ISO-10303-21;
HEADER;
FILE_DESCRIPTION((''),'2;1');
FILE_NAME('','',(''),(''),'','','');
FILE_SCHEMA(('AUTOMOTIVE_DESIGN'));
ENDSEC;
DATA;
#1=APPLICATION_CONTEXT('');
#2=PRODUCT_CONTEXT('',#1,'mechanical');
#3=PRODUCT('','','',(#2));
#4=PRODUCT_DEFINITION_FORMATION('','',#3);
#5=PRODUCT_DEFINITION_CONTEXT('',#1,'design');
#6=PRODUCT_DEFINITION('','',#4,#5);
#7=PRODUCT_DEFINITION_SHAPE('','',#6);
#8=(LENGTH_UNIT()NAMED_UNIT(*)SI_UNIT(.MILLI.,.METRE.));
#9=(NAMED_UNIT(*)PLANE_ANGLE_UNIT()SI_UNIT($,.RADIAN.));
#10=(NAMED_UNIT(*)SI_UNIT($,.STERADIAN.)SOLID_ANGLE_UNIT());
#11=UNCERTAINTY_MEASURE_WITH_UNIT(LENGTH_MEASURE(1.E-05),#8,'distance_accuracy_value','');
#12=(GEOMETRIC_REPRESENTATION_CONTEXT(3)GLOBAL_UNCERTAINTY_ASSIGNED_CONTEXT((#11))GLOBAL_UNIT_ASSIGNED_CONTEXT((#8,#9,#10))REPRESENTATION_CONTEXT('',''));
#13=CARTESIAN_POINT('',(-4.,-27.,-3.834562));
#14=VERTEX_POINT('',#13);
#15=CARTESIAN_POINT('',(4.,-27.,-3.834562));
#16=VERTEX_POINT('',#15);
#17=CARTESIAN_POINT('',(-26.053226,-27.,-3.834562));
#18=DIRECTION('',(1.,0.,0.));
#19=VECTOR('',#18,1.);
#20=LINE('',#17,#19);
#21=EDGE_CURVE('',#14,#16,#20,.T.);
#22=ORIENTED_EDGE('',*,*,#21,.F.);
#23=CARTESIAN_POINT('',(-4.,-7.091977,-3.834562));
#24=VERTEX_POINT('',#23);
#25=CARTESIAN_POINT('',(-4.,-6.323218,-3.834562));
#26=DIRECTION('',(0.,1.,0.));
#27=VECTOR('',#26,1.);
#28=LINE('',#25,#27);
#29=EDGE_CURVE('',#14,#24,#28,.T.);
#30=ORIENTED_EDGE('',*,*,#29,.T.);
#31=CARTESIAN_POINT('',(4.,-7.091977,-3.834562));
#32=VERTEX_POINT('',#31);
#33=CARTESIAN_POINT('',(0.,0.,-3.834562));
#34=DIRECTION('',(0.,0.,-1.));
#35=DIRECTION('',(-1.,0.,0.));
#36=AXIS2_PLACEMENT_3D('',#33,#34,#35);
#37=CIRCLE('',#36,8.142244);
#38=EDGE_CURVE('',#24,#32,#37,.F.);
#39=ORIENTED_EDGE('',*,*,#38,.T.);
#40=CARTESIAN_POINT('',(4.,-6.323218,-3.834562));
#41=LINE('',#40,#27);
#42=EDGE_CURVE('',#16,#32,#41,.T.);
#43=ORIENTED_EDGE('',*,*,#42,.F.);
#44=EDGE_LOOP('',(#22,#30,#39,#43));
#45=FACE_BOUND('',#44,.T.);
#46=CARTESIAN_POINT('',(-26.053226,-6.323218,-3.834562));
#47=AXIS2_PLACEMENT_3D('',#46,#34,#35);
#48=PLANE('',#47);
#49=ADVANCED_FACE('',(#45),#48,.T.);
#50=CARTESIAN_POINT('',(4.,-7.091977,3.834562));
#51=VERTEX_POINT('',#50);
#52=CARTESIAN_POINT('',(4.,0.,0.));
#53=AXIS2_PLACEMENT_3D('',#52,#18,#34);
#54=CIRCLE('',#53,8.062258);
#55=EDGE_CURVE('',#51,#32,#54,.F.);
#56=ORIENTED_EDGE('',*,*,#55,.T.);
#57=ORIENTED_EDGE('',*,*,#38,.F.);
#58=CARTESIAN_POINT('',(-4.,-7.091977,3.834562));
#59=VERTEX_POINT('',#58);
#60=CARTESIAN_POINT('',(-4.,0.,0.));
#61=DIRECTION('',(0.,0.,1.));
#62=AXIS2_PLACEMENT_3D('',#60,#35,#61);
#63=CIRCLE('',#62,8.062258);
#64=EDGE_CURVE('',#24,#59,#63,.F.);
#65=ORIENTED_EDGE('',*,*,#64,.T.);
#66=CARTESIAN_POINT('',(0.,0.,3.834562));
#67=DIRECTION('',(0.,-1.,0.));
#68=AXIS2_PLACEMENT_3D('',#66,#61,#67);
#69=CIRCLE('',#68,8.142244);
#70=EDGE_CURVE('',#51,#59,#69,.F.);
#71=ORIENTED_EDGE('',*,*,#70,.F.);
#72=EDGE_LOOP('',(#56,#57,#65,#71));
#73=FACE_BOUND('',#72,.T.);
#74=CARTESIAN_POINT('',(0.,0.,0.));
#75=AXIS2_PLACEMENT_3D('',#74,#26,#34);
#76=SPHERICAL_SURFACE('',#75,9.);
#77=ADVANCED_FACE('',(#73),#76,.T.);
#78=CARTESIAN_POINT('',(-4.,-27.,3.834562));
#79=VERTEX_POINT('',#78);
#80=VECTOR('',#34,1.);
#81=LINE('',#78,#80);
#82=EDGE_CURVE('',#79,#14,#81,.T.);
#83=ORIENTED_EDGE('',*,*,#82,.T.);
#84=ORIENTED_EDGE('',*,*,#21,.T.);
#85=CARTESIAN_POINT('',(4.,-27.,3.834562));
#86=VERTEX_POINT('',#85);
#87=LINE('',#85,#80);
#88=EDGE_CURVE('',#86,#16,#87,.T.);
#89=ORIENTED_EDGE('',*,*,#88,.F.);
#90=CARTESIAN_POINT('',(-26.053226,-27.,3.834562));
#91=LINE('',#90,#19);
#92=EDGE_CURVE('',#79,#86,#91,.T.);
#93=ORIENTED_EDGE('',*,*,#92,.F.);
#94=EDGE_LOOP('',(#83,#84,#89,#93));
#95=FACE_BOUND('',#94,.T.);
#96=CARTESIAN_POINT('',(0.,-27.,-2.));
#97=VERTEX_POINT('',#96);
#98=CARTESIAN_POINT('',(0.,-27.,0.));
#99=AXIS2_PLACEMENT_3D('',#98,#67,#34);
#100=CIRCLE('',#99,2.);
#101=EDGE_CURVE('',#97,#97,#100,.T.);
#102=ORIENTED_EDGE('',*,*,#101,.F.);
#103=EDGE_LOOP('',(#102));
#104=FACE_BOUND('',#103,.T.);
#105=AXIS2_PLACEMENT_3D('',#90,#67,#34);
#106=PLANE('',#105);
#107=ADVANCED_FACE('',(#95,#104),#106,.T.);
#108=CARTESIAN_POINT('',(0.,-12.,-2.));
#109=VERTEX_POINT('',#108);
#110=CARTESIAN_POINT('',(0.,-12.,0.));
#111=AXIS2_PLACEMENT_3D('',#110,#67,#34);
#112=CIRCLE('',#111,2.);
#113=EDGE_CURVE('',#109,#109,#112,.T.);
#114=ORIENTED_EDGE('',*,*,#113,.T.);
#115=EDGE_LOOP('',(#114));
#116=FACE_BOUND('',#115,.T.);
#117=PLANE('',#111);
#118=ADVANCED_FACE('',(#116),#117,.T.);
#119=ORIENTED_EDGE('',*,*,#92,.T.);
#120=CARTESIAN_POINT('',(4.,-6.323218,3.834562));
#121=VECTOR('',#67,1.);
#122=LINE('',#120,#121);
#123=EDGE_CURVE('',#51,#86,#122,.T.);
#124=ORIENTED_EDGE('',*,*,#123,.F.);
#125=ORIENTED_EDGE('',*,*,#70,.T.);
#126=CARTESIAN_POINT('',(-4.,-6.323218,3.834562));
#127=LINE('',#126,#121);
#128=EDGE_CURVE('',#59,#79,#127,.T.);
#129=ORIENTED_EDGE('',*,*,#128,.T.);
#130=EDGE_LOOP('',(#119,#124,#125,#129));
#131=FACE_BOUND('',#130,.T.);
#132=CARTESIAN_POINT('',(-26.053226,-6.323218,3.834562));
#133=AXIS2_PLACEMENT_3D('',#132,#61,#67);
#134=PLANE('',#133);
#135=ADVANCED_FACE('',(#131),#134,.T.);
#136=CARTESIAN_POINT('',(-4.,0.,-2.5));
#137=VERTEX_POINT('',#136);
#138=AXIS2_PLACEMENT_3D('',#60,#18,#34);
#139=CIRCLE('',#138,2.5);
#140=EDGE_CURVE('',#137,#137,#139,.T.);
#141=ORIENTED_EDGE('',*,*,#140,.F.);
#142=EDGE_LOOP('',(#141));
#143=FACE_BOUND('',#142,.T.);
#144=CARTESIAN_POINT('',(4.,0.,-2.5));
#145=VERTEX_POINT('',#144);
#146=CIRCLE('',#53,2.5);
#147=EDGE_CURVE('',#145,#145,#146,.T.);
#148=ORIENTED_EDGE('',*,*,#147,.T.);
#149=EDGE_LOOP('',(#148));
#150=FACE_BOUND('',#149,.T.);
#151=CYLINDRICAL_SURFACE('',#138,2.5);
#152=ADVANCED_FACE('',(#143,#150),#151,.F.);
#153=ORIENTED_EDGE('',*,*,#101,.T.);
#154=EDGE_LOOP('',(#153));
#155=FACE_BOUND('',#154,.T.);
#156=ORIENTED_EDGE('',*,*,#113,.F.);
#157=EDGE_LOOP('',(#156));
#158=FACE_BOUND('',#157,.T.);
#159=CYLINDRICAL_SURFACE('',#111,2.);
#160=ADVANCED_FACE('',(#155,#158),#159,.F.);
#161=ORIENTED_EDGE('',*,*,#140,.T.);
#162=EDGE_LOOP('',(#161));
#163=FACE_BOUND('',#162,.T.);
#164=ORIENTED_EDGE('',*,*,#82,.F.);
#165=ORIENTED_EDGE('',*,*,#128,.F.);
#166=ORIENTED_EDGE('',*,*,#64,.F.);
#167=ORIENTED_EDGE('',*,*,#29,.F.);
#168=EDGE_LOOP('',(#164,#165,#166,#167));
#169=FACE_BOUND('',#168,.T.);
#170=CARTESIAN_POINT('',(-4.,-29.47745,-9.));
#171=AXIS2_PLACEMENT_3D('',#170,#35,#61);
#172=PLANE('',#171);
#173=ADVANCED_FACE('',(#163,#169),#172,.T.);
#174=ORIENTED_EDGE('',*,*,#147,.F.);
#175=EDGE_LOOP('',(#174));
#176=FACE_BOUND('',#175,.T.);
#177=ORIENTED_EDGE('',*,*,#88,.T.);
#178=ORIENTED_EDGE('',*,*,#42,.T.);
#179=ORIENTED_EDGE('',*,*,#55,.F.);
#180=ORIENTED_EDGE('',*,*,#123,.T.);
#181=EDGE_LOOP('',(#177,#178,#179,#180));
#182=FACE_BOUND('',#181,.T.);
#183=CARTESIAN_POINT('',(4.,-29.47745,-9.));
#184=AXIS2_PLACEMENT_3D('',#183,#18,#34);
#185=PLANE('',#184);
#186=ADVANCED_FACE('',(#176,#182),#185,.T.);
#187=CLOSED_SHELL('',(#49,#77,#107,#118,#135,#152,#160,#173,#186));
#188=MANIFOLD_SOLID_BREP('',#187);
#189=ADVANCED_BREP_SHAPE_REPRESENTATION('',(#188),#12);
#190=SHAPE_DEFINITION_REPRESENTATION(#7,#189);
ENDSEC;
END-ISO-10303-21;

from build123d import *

# Parameters (mm, degrees)
CUT_EXTRUDE_START        = -9
CUT_EXTRUDE_1_OUTLINE_W  = 6
CUT_EXTRUDE_1_OUTLINE_H  = 20
CUT_EXTRUDE_1_DEPTH      = 18
CUT_EXTRUDE_2_DEPTH      = 19.193405399
CUT_EXTRUDE_2_DEPTH_BACK = 19.193405399
SKETCH_3_R               = 2.5
SKETCH_4_W               = 7.669123848
SKETCH_4_H               = 20.676781993
EXTRUDE_1_DEPTH          = 8
SKETCH_5_R               = 2
CUT_EXTRUDE_3_DEPTH      = 15


with BuildPart() as part:
    # 草图1 → 旋转1 (revolve)
    with BuildSketch(Plane(origin=(0, 0, 0), x_dir=(0, 0, -1), z_dir=(1, 0, 0))):
        with BuildLine():
            Line((0, 9), (0, -9))
            ThreePointArc((0, -9), (-9, 0), (0, 9))
        make_face()
    revolve(axis=Axis((0, 9, 0), (0, -1, 0)))

    # 切除-拉伸1: read off the stored shape, not the designer's step
    # 切除-拉伸1 outline → 切除-拉伸1 (cut)
    with BuildSketch(Plane.XY.offset(CUT_EXTRUDE_START)):
        with Locations((-7, 0)):
            Rectangle(CUT_EXTRUDE_1_OUTLINE_W, CUT_EXTRUDE_1_OUTLINE_H)
        with Locations((7, 0)):
            Rectangle(CUT_EXTRUDE_1_OUTLINE_W, CUT_EXTRUDE_1_OUTLINE_H)
    extrude(amount=CUT_EXTRUDE_1_DEPTH, mode=Mode.SUBTRACT)

    # 草图3 → 切除-拉伸2 (cut, two sides: drawn at the far end of the back side and taken through both)
    with BuildSketch(Plane(origin=(4, 0, 0), x_dir=(0, 0, -1), z_dir=(1, 0, 0)).offset(-CUT_EXTRUDE_2_DEPTH_BACK)):
        Circle(SKETCH_3_R)
    extrude(amount=CUT_EXTRUDE_2_DEPTH + CUT_EXTRUDE_2_DEPTH_BACK, mode=Mode.SUBTRACT)

    # 草图4 → 凸台-拉伸1 (add)
    with BuildSketch(Plane(origin=(4, 0, 0), x_dir=(0, 0, -1), z_dir=(1, 0, 0))):
        with Locations((0, -16.661609004)):
            Rectangle(SKETCH_4_W, SKETCH_4_H)
    extrude(amount=-EXTRUDE_1_DEPTH)

    # 草图5 → 切除-拉伸3 (cut)
    with BuildSketch(Plane.XZ.offset(27)):
        with Locations(Location((0, 0, 0), (0, 0, 270))):
            Circle(SKETCH_5_R)
    extrude(amount=-CUT_EXTRUDE_3_DEPTH, mode=Mode.SUBTRACT)


solid = part.part
